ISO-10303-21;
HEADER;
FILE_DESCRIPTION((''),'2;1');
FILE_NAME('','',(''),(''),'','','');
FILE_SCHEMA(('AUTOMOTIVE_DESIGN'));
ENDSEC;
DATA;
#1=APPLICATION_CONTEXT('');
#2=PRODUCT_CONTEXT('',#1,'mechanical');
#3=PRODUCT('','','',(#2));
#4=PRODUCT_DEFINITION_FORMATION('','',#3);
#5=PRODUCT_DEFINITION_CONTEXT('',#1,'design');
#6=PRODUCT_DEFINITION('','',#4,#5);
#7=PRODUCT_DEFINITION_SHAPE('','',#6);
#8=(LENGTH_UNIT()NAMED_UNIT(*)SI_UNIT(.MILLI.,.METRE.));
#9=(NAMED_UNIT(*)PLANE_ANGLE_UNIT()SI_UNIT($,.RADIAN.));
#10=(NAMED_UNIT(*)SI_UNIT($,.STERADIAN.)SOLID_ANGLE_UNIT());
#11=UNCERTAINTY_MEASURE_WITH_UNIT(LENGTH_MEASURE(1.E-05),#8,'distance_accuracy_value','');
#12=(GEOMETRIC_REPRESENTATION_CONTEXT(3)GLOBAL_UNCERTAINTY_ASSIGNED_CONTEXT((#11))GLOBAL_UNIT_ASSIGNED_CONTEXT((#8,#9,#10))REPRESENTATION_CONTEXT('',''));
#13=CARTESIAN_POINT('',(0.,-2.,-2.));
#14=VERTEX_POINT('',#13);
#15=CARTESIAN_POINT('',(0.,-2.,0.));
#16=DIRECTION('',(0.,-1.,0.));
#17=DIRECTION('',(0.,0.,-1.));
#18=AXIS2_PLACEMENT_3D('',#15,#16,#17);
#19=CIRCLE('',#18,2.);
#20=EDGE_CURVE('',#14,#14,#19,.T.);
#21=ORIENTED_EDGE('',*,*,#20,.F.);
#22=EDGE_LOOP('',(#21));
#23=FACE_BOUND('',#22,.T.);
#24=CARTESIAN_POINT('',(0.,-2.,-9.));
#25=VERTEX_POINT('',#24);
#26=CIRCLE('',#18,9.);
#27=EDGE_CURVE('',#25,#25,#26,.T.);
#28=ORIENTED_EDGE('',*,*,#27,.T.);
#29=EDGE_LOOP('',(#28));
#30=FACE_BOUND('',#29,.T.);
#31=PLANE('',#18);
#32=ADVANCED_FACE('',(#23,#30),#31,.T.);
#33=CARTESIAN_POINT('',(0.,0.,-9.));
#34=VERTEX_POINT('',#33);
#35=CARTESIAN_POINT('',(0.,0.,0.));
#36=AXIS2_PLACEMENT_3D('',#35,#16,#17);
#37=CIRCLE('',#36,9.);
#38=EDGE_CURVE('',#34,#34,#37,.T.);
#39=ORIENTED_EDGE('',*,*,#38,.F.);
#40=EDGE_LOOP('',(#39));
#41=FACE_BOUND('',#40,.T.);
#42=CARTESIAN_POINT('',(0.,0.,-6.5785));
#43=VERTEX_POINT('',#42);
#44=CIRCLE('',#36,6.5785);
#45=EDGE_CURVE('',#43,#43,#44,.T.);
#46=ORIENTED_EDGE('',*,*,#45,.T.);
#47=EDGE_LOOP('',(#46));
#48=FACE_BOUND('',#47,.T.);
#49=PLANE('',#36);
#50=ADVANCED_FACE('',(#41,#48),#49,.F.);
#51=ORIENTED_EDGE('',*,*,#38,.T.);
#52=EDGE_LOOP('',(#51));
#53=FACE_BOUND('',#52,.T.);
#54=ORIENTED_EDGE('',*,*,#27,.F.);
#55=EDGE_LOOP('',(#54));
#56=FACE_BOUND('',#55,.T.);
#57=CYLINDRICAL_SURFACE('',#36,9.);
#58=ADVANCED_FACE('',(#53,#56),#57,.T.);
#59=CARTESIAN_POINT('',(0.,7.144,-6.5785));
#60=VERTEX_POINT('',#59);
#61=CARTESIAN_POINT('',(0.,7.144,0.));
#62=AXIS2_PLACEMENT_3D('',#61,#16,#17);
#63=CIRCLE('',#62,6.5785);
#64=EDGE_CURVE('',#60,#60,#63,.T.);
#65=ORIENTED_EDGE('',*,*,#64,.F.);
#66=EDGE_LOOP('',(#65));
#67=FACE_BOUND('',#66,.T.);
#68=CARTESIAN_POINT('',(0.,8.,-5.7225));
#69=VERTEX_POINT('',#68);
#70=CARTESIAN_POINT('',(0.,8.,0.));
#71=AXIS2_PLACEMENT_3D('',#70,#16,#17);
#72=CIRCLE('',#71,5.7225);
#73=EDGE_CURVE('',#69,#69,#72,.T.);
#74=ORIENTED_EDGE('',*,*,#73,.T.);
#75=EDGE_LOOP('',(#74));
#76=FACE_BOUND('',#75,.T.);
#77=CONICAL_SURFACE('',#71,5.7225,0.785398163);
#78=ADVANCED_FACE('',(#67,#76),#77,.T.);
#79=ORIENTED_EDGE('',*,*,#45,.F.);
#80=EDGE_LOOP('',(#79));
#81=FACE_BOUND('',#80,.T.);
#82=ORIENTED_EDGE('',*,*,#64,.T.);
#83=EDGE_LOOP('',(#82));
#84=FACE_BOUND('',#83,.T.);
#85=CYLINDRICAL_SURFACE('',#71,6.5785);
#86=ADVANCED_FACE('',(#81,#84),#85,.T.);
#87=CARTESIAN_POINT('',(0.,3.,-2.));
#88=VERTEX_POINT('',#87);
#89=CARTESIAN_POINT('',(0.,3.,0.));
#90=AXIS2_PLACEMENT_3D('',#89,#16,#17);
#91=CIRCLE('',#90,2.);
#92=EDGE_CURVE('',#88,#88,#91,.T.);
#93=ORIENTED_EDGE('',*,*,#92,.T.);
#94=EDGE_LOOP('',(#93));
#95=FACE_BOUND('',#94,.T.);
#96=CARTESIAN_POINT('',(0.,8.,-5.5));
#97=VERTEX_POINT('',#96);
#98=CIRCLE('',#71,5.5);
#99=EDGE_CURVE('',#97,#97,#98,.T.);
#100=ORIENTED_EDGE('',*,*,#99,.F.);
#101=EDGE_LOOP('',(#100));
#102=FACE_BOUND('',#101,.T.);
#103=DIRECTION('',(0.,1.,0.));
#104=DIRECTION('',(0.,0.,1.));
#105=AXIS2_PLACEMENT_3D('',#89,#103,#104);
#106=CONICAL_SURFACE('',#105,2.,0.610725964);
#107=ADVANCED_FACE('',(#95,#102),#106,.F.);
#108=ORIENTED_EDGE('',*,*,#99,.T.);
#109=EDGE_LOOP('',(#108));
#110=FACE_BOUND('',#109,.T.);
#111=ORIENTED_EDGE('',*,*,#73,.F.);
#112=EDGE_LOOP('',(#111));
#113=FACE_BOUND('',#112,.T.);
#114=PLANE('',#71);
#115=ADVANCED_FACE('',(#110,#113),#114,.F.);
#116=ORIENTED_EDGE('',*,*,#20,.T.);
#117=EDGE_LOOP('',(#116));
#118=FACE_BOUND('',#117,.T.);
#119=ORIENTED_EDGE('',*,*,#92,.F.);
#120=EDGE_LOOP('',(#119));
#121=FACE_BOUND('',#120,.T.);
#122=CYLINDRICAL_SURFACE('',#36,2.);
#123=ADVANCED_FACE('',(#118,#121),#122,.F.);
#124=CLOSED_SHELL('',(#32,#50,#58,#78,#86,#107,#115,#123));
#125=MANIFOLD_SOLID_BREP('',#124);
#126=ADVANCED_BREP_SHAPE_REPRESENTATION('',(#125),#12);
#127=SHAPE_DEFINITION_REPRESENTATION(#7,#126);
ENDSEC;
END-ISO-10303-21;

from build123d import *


# Read off the part's stored shape, not the designer's step: G1/4 Straight Pipe Tapped Thread Stud1
with BuildPart() as part:
    # Sketch1 → Revolve1 (revolve)
    with BuildSketch(Plane.XY, mode=Mode.PRIVATE) as revolve1_sk:
        Polygon((7, 0), (2, 0), (2, 3), (5.5, 8), (7, 8), align=None)
        Polygon((7, 0), (2, 0), (2, -2), (9, -2), (9, 0), align=None)
    revolve(revolve1_sk.sketch.rotate(Axis((0, 0, 0), (0, 1, 0)), 90), axis=Axis((0, 0, 0), (0, 1, 0)))

    # G1/4 Straight Pipe Tapped Thread Stud1 o → G1/4 Straight Pipe Tapped Thread Stud1 (revolve, cut)
    with BuildSketch(Plane.XY):
        Polygon((7, 8), (5.7225, 8), (6.5785, 7.144), (6.5785, 0), (7, 0), align=None)
    revolve(axis=Axis((0, 0, 0), (0, 1, 0)), mode=Mode.SUBTRACT)


solid = part.part
